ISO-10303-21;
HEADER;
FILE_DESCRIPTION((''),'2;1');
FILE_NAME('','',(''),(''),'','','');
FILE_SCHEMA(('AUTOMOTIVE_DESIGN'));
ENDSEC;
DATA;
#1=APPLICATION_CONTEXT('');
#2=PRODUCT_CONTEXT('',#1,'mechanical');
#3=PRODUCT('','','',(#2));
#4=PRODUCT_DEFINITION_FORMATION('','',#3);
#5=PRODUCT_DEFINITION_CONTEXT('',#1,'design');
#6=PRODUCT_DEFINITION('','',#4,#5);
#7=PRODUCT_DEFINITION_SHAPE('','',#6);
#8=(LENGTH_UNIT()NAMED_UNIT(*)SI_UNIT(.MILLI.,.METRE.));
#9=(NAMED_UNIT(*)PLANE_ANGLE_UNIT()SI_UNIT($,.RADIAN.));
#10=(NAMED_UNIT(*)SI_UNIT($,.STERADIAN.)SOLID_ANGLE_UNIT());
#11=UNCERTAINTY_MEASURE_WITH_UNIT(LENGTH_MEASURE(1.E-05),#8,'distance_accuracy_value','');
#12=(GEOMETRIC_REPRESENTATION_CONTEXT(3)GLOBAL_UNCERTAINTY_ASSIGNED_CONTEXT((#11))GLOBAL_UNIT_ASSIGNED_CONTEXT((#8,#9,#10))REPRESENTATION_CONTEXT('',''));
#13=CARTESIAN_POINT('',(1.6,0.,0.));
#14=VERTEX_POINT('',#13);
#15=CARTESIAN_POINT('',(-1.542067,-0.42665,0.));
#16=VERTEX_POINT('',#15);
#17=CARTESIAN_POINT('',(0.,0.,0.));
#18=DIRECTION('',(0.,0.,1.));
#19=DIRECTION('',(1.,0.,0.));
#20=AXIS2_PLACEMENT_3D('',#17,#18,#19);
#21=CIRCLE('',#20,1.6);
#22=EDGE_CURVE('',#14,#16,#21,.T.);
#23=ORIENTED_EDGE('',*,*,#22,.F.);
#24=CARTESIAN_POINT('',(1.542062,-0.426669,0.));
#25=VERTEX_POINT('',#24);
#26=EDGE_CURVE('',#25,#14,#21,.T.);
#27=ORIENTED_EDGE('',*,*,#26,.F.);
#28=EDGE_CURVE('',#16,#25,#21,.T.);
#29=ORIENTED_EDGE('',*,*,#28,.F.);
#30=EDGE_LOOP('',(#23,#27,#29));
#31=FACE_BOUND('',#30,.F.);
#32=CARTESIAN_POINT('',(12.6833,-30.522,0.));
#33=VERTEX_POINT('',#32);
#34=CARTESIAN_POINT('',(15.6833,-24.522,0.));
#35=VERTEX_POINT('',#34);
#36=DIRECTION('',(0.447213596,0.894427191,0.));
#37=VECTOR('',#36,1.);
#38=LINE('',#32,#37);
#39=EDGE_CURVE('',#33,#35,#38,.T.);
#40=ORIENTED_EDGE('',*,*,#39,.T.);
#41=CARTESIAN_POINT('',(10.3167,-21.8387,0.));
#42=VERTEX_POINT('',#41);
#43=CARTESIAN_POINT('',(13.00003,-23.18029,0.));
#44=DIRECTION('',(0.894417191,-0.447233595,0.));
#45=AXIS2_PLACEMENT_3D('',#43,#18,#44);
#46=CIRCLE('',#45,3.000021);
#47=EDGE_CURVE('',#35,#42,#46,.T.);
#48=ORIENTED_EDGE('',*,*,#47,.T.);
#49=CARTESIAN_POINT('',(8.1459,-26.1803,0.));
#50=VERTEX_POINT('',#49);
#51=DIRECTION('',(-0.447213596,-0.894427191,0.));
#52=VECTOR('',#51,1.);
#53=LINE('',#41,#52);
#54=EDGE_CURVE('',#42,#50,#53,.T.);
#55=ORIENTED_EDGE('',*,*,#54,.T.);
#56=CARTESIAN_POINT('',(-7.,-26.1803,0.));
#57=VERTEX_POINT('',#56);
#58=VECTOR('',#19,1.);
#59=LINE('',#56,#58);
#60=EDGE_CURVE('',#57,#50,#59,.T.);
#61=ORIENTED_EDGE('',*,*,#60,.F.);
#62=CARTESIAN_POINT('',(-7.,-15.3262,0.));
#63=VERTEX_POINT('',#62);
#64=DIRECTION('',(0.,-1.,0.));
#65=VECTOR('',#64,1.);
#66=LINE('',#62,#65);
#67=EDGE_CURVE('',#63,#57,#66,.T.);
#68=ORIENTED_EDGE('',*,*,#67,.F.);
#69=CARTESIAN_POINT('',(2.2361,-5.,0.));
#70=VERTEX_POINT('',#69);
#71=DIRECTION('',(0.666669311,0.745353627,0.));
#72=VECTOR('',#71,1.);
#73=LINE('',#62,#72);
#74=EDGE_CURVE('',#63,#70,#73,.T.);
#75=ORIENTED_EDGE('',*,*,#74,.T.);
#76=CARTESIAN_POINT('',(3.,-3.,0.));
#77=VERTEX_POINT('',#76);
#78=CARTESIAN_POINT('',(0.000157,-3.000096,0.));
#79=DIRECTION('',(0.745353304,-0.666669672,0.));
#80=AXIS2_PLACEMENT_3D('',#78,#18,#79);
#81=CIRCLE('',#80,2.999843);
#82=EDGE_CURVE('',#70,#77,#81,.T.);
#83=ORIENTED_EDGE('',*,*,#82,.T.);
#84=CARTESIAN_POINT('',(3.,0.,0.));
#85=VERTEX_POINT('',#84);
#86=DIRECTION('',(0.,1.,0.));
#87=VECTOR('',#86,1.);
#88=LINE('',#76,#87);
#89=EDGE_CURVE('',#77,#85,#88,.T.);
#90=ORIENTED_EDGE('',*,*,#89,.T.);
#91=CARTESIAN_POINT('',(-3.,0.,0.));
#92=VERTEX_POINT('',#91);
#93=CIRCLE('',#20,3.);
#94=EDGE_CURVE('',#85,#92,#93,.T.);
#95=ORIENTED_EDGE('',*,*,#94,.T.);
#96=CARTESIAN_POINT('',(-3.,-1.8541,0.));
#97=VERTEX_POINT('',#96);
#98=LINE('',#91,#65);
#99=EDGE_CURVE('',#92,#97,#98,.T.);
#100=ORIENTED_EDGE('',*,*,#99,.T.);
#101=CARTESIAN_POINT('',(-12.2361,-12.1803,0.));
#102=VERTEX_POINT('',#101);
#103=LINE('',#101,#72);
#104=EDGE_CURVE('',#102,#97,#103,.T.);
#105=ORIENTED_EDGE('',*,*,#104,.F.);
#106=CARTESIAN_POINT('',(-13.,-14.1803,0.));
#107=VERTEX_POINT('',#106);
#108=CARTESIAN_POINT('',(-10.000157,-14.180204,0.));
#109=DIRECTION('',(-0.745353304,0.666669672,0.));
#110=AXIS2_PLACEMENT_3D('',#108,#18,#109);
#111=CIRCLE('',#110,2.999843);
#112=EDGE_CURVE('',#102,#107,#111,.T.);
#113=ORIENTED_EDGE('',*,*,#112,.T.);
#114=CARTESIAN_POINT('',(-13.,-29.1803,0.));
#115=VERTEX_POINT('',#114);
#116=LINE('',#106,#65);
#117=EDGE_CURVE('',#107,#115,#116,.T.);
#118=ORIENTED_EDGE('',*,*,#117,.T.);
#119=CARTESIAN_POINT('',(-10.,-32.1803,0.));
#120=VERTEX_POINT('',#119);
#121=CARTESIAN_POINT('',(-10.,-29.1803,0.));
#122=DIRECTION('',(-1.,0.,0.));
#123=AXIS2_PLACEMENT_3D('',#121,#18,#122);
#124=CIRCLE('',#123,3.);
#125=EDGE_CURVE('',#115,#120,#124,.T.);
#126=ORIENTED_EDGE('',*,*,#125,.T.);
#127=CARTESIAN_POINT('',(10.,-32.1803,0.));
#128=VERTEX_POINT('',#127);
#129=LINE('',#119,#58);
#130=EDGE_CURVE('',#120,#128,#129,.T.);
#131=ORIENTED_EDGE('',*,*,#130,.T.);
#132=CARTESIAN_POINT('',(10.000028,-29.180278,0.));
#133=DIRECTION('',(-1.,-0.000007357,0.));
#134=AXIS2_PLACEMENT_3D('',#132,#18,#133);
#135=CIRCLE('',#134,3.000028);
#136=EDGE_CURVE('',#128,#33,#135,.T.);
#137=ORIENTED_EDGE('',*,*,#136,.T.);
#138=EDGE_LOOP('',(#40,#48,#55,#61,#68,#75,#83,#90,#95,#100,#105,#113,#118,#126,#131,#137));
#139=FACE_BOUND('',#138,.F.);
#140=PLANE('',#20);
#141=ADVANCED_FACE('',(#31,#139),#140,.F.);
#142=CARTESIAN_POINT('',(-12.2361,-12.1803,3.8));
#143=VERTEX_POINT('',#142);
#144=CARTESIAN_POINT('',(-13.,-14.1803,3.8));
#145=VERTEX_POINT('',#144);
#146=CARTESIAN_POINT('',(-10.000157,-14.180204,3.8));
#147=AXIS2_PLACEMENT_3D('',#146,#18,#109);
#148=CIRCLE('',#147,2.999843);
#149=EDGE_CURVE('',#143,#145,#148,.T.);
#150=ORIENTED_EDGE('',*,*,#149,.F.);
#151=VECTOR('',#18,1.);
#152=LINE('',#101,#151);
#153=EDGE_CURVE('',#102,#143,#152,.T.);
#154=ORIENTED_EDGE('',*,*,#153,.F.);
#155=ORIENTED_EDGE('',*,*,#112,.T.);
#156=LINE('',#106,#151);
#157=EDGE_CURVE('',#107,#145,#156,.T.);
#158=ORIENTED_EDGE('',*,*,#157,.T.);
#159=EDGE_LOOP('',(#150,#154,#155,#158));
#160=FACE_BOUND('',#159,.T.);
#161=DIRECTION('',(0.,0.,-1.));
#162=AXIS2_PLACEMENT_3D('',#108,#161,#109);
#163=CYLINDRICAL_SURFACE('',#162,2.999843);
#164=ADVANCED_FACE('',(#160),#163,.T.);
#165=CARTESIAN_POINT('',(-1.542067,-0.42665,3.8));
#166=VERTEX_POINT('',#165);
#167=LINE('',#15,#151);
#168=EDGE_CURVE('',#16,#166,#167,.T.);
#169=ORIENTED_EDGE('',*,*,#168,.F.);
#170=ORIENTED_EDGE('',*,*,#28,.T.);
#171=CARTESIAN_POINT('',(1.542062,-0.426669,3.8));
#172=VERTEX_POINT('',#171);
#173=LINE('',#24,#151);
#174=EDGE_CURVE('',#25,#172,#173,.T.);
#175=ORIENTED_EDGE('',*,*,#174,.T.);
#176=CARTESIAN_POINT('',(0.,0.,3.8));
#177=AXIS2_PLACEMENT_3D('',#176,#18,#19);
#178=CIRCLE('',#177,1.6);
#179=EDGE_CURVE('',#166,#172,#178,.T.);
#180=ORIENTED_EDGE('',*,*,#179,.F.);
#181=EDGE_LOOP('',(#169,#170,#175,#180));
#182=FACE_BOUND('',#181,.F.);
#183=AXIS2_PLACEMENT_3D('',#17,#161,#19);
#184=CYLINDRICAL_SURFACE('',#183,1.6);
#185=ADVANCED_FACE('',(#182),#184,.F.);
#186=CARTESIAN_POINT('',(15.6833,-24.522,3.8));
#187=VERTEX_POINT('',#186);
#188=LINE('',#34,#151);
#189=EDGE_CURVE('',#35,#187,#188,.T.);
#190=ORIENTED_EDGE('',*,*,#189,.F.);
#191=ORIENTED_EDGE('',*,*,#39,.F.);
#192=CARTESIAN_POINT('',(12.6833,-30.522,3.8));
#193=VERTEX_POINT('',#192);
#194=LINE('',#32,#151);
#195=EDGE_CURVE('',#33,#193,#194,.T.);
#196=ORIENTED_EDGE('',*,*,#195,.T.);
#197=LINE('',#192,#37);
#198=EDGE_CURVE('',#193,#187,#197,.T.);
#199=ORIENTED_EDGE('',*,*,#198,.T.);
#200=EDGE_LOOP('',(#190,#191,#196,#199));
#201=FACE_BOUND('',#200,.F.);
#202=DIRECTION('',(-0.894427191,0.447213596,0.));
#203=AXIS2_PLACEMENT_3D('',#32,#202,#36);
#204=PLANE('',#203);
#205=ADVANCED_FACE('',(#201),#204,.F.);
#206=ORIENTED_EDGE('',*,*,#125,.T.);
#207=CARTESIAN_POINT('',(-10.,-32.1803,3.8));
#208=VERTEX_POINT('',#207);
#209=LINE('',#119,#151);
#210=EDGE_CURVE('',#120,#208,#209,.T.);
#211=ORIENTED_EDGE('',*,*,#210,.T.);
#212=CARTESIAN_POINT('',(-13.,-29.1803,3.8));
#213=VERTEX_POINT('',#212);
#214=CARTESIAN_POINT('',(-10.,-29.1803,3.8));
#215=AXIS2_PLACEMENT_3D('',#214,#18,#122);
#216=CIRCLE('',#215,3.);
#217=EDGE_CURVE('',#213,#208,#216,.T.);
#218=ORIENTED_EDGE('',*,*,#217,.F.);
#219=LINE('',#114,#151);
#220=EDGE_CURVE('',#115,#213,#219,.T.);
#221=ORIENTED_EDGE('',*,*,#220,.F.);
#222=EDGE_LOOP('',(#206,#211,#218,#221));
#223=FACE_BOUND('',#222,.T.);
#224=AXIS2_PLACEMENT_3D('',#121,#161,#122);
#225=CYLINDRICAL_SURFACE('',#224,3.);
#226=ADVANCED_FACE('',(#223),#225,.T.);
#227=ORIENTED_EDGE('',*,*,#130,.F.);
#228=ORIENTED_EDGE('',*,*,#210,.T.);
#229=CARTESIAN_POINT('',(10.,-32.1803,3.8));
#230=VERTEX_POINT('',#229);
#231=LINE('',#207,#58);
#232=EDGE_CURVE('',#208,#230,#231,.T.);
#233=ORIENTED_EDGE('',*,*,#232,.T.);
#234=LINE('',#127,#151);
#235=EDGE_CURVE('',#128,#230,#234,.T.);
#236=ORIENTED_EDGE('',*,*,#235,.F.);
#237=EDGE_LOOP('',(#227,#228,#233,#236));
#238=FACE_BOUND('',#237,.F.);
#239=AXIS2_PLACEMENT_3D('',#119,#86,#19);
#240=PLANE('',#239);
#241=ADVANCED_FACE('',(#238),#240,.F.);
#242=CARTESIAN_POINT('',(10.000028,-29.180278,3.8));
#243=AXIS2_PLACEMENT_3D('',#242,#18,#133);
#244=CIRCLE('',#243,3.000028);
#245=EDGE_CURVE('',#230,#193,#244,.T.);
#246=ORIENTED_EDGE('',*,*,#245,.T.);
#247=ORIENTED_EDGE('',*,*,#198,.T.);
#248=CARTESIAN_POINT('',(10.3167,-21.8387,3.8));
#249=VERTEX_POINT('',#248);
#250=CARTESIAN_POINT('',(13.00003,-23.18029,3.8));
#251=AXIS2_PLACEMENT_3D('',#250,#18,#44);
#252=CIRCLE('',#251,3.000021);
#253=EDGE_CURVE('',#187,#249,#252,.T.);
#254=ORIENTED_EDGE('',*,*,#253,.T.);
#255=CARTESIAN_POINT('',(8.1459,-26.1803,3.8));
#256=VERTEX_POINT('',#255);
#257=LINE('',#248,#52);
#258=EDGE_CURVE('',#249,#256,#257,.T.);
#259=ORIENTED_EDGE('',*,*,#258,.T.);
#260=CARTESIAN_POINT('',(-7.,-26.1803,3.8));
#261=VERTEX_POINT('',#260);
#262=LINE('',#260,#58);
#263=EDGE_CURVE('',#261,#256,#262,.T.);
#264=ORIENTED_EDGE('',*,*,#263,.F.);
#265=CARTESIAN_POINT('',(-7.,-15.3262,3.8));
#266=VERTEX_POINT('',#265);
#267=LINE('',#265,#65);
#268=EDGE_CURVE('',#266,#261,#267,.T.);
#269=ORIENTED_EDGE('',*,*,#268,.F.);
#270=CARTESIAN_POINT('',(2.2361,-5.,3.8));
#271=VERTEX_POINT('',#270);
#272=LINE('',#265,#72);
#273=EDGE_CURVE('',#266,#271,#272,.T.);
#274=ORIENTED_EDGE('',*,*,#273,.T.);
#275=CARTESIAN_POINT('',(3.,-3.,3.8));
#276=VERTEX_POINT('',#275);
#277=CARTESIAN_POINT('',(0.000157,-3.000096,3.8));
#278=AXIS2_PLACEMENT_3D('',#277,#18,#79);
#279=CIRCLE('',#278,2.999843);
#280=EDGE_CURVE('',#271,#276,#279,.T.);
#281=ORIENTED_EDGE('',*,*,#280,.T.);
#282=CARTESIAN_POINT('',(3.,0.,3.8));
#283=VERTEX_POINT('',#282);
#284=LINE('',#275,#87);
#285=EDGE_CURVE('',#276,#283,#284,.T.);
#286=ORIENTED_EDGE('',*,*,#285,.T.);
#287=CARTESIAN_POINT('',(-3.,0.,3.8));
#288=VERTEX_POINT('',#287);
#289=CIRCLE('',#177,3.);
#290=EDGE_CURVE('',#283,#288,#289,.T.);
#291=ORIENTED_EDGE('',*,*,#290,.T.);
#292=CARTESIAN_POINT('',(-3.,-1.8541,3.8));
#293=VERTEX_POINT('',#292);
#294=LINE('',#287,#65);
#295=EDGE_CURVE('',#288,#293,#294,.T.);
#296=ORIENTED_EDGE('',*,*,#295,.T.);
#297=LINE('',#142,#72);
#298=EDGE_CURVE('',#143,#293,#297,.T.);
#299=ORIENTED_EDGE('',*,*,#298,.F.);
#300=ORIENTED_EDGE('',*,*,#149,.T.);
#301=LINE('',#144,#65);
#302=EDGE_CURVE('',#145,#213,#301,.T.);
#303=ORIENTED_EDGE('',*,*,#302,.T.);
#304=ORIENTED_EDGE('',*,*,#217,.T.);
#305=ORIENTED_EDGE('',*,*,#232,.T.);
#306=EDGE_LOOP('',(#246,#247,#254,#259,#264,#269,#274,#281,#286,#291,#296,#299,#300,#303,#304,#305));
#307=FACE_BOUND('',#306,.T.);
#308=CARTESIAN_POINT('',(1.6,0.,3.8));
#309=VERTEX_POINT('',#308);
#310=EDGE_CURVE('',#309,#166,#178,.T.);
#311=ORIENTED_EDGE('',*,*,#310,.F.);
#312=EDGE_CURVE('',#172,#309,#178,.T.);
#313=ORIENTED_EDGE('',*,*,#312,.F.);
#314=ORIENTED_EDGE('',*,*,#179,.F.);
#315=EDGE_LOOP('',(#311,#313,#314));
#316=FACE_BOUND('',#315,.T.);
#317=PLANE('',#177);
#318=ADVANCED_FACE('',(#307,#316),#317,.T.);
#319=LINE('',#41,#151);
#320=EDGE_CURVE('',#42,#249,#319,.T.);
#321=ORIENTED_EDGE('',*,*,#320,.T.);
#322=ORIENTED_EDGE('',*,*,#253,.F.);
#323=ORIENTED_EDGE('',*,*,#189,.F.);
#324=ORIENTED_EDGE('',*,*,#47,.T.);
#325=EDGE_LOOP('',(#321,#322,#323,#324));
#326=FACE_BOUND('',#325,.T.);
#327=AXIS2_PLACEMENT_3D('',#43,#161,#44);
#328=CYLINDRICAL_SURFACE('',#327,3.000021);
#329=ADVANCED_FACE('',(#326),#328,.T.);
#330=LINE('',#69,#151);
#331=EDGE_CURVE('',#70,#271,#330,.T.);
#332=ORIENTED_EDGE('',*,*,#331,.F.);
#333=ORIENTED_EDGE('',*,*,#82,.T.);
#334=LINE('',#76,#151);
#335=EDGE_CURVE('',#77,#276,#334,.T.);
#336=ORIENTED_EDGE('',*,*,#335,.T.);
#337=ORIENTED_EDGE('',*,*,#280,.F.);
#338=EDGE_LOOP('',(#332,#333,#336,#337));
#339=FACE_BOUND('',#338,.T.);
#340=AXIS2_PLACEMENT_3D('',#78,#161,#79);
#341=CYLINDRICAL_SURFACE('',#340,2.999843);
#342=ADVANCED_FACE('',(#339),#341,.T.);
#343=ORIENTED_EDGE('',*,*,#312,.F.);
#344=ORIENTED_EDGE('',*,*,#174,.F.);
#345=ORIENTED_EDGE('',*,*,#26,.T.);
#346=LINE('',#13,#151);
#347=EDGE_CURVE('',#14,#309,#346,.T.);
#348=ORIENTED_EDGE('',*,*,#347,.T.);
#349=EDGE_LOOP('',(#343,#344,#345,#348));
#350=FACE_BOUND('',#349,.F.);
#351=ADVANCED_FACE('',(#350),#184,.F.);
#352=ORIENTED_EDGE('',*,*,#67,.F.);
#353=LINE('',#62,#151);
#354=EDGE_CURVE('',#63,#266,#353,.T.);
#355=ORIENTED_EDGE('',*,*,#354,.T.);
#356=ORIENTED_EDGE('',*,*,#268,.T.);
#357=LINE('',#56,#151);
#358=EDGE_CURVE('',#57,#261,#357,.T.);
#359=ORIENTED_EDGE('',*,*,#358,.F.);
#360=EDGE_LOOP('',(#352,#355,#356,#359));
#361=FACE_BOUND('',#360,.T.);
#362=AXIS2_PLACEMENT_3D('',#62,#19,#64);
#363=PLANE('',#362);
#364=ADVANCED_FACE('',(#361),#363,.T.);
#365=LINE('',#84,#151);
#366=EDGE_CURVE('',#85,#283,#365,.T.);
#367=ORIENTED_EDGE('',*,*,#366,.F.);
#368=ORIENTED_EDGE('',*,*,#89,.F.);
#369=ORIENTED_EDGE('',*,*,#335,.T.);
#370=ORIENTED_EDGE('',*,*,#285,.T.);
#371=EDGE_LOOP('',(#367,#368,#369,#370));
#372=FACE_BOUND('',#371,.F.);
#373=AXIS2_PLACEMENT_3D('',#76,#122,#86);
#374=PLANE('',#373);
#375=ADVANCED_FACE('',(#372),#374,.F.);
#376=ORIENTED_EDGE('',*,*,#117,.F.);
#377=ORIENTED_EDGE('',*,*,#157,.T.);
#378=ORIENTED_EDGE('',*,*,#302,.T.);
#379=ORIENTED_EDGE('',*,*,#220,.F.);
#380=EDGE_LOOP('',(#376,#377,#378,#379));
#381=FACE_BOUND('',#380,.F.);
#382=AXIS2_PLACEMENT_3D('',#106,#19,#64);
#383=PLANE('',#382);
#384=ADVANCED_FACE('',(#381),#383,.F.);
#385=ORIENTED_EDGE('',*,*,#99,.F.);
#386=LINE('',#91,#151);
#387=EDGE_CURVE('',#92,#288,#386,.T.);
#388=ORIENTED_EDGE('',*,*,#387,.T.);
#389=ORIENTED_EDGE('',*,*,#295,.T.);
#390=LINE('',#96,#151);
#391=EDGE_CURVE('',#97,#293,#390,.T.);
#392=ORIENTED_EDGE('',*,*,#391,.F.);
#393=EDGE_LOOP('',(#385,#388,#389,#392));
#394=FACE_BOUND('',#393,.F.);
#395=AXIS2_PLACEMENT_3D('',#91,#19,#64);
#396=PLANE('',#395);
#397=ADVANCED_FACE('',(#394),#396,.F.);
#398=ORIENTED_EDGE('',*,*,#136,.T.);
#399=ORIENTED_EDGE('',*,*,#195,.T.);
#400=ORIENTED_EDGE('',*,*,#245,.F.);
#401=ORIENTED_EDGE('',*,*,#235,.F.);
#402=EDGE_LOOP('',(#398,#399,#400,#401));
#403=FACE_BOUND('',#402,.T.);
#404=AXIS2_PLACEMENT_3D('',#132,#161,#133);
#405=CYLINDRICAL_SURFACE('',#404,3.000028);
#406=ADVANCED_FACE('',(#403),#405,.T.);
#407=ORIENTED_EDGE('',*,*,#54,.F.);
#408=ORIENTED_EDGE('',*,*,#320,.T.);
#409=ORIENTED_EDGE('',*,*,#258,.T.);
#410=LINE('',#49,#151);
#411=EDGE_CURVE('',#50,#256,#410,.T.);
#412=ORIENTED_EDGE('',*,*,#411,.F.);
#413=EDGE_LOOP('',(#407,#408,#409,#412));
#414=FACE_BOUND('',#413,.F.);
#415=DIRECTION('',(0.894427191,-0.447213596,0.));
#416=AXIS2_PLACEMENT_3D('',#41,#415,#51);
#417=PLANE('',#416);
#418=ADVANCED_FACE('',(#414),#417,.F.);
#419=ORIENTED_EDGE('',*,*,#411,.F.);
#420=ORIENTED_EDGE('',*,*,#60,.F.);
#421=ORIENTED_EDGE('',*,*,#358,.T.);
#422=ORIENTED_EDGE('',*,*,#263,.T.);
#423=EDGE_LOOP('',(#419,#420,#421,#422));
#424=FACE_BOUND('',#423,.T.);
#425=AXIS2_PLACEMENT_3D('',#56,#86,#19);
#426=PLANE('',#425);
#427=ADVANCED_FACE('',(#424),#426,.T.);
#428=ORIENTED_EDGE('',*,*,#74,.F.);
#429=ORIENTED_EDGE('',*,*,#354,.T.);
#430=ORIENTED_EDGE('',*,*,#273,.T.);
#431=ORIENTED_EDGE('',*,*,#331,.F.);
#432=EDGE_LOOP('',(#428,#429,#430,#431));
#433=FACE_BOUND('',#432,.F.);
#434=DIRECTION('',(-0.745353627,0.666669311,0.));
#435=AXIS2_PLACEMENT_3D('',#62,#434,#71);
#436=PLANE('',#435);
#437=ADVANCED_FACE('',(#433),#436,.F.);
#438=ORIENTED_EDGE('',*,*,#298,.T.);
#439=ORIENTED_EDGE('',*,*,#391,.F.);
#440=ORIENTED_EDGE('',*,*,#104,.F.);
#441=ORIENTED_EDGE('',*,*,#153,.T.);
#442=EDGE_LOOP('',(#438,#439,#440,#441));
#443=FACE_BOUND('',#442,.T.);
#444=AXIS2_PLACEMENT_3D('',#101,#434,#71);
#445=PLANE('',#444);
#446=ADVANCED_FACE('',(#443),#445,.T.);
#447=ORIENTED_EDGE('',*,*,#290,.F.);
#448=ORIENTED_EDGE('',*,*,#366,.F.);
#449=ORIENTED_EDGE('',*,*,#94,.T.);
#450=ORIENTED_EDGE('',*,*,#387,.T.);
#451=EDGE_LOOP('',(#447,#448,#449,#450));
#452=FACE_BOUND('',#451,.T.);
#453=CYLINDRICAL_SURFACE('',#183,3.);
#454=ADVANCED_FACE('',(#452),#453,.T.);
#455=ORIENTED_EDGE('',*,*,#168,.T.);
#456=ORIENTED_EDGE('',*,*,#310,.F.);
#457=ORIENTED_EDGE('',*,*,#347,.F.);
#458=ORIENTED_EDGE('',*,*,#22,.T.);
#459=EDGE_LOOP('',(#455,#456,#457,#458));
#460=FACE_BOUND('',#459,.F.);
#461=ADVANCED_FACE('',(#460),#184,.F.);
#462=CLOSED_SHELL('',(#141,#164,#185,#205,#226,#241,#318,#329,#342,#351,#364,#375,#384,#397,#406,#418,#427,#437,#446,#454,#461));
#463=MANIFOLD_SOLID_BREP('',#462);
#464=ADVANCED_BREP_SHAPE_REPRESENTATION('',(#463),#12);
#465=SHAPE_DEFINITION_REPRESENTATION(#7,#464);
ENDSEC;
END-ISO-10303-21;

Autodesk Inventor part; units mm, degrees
ref_plane "YZ Plane" through (0, 0, 0) normal (1, 0, 0) x (0, 1, 0)
ref_plane "XZ Plane" through (0, 0, 0) normal (0, 1, 0) x (-1, 0, 0)
ref_plane "XY Plane" through (0, 0, 0) normal (0, 0, 1) x (1, 0, 0)
sketch "Sketch1" plane through (0, 0, 0) normal (0, 0, 1) x (1, 0, 0)
  circle A0 centre (0, 0) radius 1.6
  arc A1 (3, 0) -> (-3, 0) centre (0, 0) ccw
  line L0 (-3, 0) -> (-3, -1.8541)
  line L1 (-3, -3) -> (3, -3) construction
  line L2 (3, -3) -> (3, 0)
  arc A2 (-2.2361, -1) -> (-3, -3) centre (0, -3) ccw construction
  arc A3 (-13, -29.1803) -> (-10, -32.1803) centre (-10, -29.1803) ccw
  arc A4 (7, -29.1803) -> (12.6833, -30.522) centre (10, -29.1803) ccw
  arc A5 (15.6833, -24.522) -> (10.3167, -21.8387) centre (13, -23.1803) ccw
  arc A6 (-12.2361, -12.1803) -> (-13, -14.1803) centre (-10, -14.1803) ccw
  line L3 (-10, -29.1803) -> (10, -29.1803) construction
  line L4 (-7.7639, -16.1803) -> (-7, -15.3262)
  line L5 (-12.2361, -12.1803) -> (-3, -1.8541)
  line L6 (-13, -14.1803) -> (-13, -29.1803)
  line L7 (-7, -14.1803) -> (-7, -15.3262)
  line L8 (-10, -26.1803) -> (-7, -26.1803)
  line L9 (-10, -32.1803) -> (10, -32.1803)
  line L10 (10.3167, -21.8387) -> (7.3167, -27.8387)
  line L11 (12.6833, -30.522) -> (15.6833, -24.522)
  line L12 (-3, -1.8541) -> (-2.2361, -1) construction
  arc A7 (3, -3) -> (-2.2361, -1) centre (0, -3) ccw
  arc A8 (-3, -3) -> (2.2361, -5) centre (0, -3) ccw construction
  line L13 (-3, -1.8541) -> (-3, -3) construction
  arc A9 (2.2361, -5) -> (3, -3) centre (0, -3) ccw
  line L14 (-7, -15.3262) -> (2.2361, -5)
  line L15 (-7, -15.3262) -> (-7, -26.1803)
  arc A10 (-13, -14.1803) -> (-7, -14.1803) centre (-10, -14.1803) ccw construction
  line L16 (-7, -26.1803) -> (10, -26.1803)
  line L17 (-7, -26.1803) -> (-7, -29.1803)
  arc A11 (-10, -26.1803) -> (-13, -29.1803) centre (-10, -29.1803) ccw construction
  arc A12 (-10, -32.1803) -> (-10, -26.1803) centre (-10, -29.1803) ccw construction
  arc A13 (7.3167, -27.8387) -> (7, -29.1803) centre (10, -29.1803) ccw construction
  arc A14 (10, -26.1803) -> (7.3167, -27.8387) centre (10, -29.1803) ccw construction
  arc A15 (12.6833, -30.522) -> (10, -26.1803) centre (10, -29.1803) ccw construction
  arc A16 (10.3167, -21.8387) -> (15.6833, -24.522) centre (13, -23.1803) ccw construction
  point P0 (0, -29.1803)
  point P1 (8.1459, -26.1803)
  dimension "d0" = 3.2
  dimension "d1" = 6
  dimension "d2" = 3
  dimension "d3" = 6
  dimension "d4" = 6
  dimension "d5" = 6
  dimension "d6" = 6
  dimension "d7" = 15
  dimension "d8" = 6
  dimension "d9" = 15
  dimension "d10" = 20
  dimension "d11" = 3
  dimension "d12" = 6
extrude "Extrusion1" add sketch "Sketch1" along normal blind 3.8
properties part number "carlig 2"
